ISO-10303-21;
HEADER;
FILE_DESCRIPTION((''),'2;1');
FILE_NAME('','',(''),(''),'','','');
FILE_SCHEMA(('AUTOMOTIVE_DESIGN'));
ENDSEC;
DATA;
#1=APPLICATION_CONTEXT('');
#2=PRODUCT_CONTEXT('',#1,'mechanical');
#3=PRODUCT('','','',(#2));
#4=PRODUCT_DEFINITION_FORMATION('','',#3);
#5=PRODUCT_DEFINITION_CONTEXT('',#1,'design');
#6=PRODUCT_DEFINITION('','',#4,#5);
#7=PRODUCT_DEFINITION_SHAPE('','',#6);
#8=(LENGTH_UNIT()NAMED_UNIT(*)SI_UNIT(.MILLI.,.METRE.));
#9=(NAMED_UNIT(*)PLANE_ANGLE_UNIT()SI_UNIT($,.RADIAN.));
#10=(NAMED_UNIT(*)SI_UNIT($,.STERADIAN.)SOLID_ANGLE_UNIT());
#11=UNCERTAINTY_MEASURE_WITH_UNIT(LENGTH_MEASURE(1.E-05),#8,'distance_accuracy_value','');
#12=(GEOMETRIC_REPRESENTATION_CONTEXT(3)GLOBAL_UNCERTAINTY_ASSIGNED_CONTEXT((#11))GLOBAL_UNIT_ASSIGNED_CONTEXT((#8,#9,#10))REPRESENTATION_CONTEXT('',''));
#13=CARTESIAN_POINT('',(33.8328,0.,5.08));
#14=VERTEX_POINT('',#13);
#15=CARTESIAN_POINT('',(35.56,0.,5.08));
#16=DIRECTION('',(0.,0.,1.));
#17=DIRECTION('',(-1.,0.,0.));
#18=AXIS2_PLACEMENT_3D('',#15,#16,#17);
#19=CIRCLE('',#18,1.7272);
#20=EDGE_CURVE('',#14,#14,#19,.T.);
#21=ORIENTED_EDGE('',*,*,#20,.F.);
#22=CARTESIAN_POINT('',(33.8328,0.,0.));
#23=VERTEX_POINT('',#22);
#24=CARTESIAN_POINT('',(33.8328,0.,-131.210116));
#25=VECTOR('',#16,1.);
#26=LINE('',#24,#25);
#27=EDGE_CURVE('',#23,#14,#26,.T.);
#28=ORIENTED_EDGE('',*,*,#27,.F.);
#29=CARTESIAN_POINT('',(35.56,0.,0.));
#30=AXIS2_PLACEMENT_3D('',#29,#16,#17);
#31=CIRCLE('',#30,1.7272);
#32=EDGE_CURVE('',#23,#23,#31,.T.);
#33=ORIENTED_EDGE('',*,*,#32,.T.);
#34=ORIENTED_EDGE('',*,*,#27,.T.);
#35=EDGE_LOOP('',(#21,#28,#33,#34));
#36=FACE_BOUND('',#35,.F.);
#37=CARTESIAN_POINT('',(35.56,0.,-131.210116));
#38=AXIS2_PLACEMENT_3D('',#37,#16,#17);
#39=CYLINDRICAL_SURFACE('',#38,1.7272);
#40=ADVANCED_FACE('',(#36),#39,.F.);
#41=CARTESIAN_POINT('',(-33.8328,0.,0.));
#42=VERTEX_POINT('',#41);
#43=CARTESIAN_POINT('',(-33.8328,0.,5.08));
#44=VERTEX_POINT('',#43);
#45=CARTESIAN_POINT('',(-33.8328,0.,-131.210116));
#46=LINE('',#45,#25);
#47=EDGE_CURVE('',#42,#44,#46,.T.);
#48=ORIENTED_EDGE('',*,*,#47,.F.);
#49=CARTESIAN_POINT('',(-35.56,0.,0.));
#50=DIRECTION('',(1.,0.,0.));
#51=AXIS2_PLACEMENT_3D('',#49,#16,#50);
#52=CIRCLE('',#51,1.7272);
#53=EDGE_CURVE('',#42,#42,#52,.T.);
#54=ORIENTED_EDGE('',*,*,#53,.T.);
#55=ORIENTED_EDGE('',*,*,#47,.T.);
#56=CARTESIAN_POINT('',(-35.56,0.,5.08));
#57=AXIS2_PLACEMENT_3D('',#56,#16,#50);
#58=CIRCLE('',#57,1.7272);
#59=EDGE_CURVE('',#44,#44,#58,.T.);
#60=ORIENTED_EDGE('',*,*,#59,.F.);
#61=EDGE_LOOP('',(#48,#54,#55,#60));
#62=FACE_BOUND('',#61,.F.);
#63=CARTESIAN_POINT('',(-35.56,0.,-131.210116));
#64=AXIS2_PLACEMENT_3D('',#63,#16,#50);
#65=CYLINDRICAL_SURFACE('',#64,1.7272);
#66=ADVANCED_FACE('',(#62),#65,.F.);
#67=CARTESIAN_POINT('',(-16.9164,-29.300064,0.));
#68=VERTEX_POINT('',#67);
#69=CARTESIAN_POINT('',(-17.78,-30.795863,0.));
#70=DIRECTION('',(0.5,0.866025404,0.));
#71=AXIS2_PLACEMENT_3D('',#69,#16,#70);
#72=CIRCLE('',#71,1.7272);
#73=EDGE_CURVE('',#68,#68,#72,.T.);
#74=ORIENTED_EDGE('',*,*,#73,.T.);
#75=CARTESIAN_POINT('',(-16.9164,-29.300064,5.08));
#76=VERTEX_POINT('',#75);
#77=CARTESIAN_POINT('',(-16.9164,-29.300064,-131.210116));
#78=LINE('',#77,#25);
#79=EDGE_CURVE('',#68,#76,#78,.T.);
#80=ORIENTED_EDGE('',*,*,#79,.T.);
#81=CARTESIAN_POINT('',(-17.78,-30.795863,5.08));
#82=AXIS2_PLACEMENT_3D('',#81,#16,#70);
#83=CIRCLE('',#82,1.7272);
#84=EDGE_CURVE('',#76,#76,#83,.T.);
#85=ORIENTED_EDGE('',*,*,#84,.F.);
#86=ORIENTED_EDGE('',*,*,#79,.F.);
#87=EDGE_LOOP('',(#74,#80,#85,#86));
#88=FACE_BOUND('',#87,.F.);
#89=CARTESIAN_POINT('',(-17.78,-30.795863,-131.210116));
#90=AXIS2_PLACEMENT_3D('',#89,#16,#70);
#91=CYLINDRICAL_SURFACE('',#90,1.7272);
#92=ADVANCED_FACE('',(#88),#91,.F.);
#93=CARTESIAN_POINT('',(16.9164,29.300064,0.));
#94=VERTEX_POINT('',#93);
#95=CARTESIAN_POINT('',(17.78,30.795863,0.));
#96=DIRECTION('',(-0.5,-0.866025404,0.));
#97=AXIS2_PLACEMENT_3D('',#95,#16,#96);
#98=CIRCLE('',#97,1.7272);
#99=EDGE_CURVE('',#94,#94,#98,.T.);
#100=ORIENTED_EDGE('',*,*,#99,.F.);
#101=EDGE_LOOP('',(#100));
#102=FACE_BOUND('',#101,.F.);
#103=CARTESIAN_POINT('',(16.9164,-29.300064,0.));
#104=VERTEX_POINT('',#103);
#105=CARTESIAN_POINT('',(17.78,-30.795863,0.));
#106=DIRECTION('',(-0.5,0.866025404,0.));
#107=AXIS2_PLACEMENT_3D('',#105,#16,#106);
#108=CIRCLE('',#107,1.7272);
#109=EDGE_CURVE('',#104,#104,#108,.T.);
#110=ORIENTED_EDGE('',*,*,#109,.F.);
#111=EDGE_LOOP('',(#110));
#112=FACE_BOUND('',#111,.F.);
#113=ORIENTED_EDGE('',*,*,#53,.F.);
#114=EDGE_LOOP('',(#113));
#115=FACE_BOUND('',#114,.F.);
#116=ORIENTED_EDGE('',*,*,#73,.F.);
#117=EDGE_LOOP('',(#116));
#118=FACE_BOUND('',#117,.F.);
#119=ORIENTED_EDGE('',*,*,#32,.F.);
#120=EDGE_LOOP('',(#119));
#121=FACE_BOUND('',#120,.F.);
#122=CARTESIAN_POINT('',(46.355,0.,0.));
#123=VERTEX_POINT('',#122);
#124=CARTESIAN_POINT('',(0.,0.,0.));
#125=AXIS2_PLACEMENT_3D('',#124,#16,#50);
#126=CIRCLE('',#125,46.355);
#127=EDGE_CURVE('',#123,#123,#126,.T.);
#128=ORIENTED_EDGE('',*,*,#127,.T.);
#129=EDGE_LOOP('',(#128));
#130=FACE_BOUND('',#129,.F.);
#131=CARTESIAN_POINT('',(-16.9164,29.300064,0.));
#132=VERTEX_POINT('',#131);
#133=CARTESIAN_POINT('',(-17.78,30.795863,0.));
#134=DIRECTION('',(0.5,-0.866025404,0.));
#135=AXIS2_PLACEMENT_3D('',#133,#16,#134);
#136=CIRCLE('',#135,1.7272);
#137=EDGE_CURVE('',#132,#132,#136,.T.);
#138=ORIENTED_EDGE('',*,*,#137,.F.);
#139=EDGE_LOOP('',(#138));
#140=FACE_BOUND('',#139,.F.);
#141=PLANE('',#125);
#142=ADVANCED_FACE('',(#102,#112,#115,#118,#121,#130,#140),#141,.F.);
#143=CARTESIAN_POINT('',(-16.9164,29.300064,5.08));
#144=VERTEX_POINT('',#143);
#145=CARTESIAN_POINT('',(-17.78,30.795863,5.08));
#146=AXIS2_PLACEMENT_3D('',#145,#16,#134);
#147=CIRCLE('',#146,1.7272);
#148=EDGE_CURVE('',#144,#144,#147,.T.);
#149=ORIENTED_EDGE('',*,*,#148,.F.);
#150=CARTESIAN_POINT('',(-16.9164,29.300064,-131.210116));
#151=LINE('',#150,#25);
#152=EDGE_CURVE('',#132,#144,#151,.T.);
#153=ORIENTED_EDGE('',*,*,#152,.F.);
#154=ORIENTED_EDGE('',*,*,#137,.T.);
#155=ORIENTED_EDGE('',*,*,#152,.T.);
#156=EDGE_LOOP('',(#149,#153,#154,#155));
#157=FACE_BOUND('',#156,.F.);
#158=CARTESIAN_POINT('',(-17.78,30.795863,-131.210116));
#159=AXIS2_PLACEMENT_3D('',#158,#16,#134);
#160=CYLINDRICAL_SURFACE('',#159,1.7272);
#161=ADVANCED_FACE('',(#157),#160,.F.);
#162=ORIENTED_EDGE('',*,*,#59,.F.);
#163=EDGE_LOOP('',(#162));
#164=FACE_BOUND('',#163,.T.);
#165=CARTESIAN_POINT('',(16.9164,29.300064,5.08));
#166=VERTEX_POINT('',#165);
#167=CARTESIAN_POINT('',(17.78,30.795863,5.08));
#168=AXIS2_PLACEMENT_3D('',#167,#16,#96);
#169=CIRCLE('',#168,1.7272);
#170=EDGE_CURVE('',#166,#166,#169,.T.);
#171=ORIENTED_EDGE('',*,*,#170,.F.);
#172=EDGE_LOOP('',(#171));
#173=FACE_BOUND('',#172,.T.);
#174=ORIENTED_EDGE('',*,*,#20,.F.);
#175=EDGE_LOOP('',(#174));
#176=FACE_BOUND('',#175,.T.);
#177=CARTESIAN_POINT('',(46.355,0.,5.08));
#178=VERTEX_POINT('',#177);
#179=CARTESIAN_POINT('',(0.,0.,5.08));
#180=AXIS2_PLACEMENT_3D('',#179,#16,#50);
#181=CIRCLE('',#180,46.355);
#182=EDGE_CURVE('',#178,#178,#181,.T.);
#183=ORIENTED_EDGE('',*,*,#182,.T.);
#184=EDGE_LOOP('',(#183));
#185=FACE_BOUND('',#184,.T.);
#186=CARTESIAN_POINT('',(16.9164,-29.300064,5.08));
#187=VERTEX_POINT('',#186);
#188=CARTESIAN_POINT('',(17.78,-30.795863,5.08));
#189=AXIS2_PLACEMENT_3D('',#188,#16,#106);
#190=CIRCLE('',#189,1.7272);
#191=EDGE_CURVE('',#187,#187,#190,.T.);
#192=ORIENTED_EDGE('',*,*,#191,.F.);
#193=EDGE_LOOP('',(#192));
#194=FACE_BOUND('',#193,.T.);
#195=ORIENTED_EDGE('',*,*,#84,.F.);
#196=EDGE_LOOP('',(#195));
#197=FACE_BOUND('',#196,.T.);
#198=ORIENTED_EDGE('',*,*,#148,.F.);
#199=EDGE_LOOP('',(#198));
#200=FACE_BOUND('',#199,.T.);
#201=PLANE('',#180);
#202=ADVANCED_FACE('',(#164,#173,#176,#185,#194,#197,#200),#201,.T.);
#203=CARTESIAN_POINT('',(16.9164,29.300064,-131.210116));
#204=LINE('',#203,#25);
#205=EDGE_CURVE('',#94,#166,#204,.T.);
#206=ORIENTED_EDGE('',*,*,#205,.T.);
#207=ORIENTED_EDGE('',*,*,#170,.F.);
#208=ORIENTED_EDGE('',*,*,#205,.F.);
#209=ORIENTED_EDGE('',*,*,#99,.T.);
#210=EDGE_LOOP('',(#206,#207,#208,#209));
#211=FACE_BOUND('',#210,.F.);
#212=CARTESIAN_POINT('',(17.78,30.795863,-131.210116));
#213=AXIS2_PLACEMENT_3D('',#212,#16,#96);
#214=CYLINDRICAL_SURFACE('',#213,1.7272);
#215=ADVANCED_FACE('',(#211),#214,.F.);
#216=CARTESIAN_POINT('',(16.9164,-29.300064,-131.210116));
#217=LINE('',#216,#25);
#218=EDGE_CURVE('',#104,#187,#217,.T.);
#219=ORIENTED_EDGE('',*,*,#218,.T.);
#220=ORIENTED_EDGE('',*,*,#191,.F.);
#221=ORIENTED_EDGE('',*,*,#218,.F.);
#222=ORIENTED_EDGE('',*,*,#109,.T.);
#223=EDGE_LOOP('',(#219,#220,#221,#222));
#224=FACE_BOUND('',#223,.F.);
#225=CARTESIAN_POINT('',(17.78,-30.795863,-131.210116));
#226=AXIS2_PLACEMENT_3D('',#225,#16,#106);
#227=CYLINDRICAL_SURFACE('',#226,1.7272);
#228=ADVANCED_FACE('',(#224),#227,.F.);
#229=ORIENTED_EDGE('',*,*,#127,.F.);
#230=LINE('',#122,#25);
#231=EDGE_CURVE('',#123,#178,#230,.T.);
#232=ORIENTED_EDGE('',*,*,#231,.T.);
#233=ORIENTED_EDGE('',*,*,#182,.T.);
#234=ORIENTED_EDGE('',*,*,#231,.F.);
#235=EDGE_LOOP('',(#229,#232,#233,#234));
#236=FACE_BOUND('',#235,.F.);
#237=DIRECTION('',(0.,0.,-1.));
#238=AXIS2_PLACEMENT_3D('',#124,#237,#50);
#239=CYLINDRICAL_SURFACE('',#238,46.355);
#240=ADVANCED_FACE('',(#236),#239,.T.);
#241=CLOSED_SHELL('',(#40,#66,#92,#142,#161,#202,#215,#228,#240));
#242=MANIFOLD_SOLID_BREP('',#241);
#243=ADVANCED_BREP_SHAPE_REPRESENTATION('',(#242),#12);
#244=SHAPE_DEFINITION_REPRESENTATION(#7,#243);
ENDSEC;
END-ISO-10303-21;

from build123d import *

# Parameters (mm, degrees)
F0_R            = 46.355
F1_DEPTH        = 5.08
F4_D            = 3.4544
F4_COPIES_COUNT = 6


# Not quite as in the source:
# - a pattern or mirror of a feature is missing from the dataset's text; its kind, count and spacing are read off the source's solid


with BuildPart() as f1:
    # F0 (on Top) → F1 (new body)
    with BuildSketch(Plane.XY):
        Circle(F0_R)
    extrude(amount=F1_DEPTH)

    # F4 (through all)
    with Locations(Plane(origin=(0, 0, 0), x_dir=(1, 0, 0), z_dir=(0, 0, -1))):
        with Locations((35.56, 0)):
            f4 = Hole(F4_D / 2)

    # F4_copies: F4 ×6 about axis
    f4_copies_axis = Axis((0, 0, 0), (0, 0, 1))
    for i in range(1, F4_COPIES_COUNT):
        add(f4.rotate(f4_copies_axis, i * 360 / F4_COPIES_COUNT), mode=Mode.SUBTRACT)


solid = f1.part
